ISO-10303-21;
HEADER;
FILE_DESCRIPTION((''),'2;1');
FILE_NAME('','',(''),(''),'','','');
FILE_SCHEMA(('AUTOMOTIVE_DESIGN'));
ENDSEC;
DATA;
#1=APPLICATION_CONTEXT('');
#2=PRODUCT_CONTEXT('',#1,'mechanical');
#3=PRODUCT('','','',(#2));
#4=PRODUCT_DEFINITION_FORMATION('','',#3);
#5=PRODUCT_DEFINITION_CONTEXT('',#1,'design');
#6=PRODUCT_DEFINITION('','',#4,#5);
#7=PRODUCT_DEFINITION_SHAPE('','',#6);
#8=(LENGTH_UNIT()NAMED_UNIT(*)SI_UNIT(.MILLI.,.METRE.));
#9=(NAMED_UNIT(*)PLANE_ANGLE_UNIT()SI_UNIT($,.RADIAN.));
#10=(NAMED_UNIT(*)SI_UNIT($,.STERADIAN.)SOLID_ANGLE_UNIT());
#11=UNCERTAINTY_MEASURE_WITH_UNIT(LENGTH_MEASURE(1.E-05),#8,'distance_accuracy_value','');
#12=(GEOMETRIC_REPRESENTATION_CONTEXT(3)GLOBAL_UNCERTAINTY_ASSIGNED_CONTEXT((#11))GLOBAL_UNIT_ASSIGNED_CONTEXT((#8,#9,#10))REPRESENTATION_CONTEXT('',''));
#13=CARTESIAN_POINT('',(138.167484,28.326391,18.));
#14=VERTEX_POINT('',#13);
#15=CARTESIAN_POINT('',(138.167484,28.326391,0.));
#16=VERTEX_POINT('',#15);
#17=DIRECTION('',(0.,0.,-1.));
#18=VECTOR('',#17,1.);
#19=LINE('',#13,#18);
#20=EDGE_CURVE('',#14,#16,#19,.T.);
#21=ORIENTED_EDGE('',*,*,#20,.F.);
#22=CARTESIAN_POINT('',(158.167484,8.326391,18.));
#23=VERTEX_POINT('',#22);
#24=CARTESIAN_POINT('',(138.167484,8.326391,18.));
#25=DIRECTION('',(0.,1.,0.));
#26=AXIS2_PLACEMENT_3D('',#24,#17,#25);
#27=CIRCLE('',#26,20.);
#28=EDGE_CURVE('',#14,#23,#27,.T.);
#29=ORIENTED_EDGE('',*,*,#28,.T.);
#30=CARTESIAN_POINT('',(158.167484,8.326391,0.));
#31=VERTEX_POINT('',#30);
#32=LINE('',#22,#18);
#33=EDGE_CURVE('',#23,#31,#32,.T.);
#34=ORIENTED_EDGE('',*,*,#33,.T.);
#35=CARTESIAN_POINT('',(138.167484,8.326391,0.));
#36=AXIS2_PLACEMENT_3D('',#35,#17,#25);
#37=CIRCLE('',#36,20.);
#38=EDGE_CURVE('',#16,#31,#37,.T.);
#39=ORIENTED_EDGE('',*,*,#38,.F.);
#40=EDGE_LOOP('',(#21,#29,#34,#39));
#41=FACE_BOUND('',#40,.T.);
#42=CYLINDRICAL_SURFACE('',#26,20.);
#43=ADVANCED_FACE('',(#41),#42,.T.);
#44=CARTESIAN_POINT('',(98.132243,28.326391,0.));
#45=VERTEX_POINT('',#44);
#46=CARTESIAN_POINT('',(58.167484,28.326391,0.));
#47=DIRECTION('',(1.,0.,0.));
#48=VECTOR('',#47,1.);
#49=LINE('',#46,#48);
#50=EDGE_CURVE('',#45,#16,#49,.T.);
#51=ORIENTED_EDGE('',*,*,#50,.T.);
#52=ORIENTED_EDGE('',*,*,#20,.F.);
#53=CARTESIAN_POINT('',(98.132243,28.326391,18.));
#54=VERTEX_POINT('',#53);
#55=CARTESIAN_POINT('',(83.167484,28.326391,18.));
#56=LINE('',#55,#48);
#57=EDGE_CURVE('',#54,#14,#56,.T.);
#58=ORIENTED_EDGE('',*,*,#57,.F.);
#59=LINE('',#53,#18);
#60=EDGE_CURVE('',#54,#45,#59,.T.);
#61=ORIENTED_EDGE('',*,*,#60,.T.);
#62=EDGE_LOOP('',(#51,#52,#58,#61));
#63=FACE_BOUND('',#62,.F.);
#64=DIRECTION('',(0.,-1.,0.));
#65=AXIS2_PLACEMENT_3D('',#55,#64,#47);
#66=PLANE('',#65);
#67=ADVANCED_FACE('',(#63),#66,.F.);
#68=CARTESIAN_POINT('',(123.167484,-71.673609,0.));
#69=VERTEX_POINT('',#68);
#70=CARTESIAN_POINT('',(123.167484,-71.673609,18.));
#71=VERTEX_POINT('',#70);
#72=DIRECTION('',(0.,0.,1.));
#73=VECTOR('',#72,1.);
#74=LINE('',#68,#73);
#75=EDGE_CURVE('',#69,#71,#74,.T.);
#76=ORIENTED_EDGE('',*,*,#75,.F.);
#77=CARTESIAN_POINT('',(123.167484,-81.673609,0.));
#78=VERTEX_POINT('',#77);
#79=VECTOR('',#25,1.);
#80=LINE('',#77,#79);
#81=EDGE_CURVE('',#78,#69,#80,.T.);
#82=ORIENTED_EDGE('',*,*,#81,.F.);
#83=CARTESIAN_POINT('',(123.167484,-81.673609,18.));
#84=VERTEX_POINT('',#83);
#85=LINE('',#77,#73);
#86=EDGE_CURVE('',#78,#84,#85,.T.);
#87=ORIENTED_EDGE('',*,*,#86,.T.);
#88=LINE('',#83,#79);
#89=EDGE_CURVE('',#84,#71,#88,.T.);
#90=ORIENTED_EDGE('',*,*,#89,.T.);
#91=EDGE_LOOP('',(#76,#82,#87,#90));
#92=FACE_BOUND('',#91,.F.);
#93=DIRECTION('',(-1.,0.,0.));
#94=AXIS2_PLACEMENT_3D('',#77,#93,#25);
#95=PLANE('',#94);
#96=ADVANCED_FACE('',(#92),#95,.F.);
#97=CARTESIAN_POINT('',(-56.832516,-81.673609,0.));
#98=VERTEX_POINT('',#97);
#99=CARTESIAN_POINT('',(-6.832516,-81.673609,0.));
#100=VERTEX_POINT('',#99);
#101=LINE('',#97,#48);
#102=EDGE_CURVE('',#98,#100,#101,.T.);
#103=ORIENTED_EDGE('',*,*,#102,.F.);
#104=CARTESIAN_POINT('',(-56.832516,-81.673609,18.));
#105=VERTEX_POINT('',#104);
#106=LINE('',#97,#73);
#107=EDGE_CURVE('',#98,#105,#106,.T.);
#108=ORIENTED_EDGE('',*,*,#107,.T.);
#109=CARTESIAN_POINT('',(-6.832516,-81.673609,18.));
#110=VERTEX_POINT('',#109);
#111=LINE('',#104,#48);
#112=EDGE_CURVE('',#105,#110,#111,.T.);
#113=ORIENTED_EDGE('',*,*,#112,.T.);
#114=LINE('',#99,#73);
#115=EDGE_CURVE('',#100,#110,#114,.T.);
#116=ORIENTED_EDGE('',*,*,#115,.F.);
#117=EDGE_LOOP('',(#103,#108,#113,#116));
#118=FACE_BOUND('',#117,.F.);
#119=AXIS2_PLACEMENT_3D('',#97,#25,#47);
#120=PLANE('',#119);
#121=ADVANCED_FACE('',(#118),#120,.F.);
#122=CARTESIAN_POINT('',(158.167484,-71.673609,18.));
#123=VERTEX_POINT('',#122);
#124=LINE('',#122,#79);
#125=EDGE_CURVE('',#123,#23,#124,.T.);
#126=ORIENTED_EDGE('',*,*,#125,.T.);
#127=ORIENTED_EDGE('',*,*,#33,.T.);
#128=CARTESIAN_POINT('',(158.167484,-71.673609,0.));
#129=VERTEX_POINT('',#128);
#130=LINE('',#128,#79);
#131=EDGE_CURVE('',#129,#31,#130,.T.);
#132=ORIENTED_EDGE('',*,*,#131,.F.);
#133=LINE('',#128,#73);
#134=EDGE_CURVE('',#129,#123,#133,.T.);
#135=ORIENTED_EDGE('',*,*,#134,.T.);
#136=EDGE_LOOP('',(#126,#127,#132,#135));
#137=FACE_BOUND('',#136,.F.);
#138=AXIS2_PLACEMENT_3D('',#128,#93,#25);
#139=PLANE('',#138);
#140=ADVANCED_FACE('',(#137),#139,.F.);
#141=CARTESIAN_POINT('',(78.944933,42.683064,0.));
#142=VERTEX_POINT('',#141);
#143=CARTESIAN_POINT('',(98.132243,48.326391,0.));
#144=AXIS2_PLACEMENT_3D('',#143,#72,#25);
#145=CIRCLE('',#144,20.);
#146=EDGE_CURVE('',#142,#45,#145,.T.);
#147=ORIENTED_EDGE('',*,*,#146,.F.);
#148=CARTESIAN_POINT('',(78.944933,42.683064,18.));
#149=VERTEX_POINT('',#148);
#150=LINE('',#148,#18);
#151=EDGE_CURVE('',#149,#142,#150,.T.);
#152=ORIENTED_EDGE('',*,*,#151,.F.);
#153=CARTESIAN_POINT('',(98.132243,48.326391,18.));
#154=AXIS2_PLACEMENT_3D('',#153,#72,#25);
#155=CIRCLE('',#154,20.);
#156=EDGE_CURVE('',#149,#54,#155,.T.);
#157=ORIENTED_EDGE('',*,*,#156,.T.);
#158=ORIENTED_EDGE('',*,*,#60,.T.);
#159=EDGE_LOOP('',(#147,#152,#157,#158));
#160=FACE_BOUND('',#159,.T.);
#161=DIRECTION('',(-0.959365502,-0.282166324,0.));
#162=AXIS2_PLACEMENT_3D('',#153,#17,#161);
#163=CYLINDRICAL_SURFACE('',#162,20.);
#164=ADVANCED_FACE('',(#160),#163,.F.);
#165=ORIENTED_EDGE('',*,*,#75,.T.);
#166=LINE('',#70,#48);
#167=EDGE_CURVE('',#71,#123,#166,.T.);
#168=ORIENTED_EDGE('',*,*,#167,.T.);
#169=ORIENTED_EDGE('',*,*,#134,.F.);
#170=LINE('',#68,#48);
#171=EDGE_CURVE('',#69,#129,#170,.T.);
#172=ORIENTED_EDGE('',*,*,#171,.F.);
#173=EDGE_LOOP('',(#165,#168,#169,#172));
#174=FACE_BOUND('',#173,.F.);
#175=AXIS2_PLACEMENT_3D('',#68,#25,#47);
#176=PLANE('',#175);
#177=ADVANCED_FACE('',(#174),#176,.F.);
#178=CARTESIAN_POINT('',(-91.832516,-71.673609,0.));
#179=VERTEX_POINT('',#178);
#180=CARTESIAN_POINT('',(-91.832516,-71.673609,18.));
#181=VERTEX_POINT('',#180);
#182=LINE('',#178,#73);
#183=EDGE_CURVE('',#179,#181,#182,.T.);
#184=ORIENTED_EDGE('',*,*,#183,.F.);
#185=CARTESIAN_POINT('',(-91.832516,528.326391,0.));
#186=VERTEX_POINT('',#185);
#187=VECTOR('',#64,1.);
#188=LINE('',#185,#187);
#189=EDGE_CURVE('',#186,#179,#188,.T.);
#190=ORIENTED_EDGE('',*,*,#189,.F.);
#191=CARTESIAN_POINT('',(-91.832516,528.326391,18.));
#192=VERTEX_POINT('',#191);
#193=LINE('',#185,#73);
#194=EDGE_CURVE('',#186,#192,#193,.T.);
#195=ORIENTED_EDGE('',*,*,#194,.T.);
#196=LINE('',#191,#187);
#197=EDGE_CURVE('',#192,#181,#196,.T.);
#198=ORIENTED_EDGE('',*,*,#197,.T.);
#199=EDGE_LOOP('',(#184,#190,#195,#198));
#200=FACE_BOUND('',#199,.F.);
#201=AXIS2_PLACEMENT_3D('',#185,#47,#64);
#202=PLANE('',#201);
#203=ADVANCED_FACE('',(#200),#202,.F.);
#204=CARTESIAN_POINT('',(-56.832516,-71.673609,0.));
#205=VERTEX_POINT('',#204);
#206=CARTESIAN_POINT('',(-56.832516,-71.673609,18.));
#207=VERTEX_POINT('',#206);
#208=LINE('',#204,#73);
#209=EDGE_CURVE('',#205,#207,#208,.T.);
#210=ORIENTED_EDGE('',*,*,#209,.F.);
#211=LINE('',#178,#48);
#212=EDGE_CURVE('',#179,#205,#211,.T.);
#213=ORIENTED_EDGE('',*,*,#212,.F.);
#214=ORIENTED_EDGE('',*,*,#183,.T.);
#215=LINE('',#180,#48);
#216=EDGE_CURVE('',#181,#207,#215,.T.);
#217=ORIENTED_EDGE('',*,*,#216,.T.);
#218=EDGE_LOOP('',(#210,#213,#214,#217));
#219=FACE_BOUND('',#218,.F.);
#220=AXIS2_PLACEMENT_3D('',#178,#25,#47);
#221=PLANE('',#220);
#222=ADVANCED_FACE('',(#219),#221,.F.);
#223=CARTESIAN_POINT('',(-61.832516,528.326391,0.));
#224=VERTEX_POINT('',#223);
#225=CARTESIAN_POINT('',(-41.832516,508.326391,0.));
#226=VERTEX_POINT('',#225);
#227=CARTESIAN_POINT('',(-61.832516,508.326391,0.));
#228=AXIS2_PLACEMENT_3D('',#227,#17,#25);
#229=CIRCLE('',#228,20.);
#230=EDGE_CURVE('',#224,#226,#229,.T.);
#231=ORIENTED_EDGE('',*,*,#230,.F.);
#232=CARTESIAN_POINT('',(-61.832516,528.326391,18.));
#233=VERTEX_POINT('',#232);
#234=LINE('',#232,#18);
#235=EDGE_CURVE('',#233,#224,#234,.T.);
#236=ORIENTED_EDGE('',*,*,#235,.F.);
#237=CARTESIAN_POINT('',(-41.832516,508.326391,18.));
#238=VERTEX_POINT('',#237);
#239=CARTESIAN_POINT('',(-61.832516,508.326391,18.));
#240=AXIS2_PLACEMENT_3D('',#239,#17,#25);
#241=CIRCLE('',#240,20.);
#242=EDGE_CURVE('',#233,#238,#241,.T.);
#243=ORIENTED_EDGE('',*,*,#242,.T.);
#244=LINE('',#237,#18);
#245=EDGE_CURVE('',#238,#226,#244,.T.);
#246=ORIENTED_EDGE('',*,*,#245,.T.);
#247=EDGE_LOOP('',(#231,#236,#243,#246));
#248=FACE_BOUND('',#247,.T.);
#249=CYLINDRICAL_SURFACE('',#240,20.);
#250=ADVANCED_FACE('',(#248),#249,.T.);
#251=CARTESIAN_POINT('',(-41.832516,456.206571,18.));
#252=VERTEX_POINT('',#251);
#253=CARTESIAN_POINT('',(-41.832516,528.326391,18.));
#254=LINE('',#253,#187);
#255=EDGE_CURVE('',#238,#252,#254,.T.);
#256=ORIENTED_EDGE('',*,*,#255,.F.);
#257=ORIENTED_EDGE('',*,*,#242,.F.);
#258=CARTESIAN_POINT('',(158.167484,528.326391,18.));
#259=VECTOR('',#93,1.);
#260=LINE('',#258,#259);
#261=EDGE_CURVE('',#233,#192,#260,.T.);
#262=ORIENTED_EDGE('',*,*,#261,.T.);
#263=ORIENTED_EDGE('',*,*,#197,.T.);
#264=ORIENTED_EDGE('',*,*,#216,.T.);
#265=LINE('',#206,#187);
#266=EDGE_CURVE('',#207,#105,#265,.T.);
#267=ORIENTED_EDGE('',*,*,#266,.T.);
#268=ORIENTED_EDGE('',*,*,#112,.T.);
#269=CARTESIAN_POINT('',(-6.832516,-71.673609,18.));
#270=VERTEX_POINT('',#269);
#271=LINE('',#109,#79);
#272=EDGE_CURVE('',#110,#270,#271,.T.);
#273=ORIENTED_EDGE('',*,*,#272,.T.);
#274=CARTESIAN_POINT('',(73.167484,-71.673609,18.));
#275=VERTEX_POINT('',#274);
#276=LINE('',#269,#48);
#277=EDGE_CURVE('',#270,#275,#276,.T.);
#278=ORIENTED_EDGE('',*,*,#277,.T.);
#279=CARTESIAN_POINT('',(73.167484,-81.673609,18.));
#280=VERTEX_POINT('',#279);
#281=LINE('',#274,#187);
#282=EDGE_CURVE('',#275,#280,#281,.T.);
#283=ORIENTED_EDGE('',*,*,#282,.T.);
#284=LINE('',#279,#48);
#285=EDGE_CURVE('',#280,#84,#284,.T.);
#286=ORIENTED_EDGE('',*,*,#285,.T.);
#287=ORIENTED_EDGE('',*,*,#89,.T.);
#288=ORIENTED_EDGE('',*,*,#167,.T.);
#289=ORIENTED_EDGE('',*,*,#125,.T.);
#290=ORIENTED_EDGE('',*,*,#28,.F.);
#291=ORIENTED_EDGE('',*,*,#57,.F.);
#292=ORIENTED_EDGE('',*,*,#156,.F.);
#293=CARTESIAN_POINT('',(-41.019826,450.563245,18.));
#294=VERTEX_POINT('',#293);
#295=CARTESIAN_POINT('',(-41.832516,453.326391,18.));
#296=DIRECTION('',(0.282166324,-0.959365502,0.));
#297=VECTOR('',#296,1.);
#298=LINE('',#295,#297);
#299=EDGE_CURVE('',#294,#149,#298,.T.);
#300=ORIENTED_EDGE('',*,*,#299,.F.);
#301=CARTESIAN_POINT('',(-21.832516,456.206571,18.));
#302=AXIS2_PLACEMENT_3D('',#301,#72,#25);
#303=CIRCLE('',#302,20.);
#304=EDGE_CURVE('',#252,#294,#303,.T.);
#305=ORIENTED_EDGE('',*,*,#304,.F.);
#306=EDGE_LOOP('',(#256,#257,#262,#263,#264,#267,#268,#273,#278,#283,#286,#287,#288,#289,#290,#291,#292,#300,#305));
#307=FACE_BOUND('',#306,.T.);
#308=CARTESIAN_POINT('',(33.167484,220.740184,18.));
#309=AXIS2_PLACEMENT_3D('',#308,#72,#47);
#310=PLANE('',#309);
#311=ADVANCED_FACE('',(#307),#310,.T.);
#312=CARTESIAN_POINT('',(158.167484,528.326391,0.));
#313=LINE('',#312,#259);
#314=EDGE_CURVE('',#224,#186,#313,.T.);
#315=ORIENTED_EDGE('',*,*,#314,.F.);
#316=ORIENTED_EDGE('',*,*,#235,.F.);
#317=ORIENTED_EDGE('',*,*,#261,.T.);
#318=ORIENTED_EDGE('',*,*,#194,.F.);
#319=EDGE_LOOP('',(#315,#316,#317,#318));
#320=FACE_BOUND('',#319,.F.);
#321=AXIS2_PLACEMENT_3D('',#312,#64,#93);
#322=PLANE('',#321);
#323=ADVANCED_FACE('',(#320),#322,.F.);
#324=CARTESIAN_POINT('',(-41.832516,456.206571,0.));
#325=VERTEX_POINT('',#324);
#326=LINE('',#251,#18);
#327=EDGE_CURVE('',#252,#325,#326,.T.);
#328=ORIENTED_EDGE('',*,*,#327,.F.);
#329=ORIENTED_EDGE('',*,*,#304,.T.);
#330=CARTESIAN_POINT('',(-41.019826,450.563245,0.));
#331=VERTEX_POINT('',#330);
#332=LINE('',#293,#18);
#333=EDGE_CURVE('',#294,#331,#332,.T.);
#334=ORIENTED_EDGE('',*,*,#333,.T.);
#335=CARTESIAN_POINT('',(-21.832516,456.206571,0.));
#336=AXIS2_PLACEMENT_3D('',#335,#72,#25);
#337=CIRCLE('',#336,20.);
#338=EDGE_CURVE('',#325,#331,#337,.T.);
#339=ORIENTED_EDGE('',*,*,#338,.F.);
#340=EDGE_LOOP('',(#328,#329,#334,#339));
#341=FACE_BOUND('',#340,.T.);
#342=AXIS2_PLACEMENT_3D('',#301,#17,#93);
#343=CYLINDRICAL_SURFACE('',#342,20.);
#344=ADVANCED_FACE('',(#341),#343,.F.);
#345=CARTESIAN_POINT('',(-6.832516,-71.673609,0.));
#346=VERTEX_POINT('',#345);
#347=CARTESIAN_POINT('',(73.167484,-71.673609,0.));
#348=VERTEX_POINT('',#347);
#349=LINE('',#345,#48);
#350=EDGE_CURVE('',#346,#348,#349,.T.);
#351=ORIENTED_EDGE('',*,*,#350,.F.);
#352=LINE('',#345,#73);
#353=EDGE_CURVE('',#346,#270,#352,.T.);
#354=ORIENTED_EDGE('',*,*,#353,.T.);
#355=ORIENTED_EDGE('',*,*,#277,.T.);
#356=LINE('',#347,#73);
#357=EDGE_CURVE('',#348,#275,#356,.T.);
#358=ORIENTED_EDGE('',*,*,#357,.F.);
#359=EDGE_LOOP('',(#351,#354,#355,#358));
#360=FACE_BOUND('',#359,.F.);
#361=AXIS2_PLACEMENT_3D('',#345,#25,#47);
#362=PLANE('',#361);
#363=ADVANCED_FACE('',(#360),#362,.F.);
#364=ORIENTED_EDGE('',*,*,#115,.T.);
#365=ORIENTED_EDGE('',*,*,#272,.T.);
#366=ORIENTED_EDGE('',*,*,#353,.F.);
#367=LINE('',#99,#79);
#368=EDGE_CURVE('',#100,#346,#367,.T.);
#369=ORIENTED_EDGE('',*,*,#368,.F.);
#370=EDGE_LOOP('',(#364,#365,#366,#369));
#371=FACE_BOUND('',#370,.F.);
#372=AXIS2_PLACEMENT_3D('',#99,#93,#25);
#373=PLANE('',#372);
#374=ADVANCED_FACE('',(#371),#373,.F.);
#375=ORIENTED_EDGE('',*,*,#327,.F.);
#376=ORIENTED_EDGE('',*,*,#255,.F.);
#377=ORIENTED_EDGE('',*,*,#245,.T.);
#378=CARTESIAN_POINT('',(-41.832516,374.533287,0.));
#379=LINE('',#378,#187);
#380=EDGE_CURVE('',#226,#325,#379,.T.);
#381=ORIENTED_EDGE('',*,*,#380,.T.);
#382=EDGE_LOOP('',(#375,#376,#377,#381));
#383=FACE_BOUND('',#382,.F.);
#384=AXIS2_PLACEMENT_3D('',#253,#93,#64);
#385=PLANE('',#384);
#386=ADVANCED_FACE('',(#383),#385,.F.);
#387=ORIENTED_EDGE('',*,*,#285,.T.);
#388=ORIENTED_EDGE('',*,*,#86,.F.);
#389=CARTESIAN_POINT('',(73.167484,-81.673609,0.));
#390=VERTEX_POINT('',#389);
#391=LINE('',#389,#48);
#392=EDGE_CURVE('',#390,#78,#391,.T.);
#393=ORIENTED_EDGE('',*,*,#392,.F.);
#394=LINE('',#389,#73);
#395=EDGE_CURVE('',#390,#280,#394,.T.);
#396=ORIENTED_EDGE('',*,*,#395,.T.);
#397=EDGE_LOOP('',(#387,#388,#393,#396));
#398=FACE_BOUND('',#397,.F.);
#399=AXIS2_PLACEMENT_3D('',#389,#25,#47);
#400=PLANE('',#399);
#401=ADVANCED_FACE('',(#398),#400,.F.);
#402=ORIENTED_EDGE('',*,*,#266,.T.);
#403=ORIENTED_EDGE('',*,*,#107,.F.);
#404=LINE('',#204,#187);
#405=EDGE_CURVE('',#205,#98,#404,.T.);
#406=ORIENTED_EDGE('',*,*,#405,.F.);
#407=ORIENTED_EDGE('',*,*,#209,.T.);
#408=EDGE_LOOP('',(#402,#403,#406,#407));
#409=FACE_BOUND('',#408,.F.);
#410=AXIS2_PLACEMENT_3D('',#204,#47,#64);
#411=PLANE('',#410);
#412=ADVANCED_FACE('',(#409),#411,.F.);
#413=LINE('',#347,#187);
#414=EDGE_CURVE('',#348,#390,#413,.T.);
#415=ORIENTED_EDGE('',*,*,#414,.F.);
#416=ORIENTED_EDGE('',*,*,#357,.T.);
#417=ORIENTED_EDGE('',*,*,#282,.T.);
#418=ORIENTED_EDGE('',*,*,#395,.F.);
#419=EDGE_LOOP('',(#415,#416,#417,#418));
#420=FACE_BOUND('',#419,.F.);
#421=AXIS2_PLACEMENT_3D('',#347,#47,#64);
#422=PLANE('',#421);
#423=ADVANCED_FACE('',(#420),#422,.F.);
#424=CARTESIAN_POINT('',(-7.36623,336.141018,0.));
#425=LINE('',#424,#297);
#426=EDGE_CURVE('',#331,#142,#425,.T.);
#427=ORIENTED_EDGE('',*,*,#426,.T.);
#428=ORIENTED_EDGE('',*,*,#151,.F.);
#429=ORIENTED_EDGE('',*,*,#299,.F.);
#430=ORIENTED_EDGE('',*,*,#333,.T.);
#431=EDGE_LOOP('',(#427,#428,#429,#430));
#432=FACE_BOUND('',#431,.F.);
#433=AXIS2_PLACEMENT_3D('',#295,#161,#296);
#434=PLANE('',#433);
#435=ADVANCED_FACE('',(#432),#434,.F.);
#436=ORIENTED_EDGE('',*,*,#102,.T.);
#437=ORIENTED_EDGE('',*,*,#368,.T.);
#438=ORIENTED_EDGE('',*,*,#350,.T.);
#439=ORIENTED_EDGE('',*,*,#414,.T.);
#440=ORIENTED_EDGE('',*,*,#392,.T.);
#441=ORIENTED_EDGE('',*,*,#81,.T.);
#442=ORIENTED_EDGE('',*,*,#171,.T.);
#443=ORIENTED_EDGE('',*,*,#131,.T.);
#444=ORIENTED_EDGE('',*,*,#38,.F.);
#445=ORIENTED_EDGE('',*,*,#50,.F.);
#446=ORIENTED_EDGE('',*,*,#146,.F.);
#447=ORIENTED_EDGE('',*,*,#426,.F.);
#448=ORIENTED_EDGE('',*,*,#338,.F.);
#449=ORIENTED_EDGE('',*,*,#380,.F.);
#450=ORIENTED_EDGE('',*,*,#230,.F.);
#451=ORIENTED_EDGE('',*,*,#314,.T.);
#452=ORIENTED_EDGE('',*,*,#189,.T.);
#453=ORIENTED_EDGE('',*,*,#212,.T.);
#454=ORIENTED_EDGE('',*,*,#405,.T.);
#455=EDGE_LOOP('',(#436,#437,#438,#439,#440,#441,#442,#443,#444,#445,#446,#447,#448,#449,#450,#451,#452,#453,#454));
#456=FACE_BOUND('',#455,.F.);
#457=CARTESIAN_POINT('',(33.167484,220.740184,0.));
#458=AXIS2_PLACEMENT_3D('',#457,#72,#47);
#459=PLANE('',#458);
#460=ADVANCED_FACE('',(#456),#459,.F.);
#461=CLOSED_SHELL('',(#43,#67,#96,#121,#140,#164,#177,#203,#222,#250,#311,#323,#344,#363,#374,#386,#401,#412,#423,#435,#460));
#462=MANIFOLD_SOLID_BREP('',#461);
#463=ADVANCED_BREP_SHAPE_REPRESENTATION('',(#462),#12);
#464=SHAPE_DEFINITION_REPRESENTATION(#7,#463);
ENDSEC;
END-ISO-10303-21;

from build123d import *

# Parameters (mm, degrees)
F1_DEPTH = 18
F3_DEPTH = 25
F4_R     = 20


with BuildPart() as f1:
    # F0 (on Top) → F1 (new body)
    with BuildSketch(Plane.XY):
        Polygon((158.1674836576, 528.3263906837), (-91.8325163424, 528.3263906837), (-91.8325163424, -71.6736093163), (-56.8325163424, -71.6736093163), (-56.8325163424, -81.6736093163), (-6.8325163424, -81.6736093163), (-6.8325163424, -71.6736093163), (73.1674836576, -71.6736093163), (73.1674836576, -81.6736093163), (123.1674836576, -81.6736093163), (123.1674836576, -71.6736093163), (158.1674836576, -71.6736093163), align=None)
    extrude(amount=F1_DEPTH)

    # F2 (on face) → F3 (cut)
    with BuildSketch(Plane.XY.offset(18)):
        Polygon((158.1674836576, 528.3263906837), (-41.8325163424, 528.3263906837), (-41.8325163424, 453.3263906837), (83.1674836576, 28.3263906837), (158.1674836576, 28.3263906837), align=None)
    extrude(amount=-F3_DEPTH, mode=Mode.SUBTRACT)

    # F4
    f4_edges = [f1.edges().sort_by_distance(p)[0] for p in [
        (-41.832516, 528.326391, 9),
        (158.167484, 28.326391, 9),
        (-41.832516, 453.326391, 9),
        (83.167484, 28.326391, 9),
    ]]
    fillet(f4_edges, radius=F4_R)


solid = f1.part
